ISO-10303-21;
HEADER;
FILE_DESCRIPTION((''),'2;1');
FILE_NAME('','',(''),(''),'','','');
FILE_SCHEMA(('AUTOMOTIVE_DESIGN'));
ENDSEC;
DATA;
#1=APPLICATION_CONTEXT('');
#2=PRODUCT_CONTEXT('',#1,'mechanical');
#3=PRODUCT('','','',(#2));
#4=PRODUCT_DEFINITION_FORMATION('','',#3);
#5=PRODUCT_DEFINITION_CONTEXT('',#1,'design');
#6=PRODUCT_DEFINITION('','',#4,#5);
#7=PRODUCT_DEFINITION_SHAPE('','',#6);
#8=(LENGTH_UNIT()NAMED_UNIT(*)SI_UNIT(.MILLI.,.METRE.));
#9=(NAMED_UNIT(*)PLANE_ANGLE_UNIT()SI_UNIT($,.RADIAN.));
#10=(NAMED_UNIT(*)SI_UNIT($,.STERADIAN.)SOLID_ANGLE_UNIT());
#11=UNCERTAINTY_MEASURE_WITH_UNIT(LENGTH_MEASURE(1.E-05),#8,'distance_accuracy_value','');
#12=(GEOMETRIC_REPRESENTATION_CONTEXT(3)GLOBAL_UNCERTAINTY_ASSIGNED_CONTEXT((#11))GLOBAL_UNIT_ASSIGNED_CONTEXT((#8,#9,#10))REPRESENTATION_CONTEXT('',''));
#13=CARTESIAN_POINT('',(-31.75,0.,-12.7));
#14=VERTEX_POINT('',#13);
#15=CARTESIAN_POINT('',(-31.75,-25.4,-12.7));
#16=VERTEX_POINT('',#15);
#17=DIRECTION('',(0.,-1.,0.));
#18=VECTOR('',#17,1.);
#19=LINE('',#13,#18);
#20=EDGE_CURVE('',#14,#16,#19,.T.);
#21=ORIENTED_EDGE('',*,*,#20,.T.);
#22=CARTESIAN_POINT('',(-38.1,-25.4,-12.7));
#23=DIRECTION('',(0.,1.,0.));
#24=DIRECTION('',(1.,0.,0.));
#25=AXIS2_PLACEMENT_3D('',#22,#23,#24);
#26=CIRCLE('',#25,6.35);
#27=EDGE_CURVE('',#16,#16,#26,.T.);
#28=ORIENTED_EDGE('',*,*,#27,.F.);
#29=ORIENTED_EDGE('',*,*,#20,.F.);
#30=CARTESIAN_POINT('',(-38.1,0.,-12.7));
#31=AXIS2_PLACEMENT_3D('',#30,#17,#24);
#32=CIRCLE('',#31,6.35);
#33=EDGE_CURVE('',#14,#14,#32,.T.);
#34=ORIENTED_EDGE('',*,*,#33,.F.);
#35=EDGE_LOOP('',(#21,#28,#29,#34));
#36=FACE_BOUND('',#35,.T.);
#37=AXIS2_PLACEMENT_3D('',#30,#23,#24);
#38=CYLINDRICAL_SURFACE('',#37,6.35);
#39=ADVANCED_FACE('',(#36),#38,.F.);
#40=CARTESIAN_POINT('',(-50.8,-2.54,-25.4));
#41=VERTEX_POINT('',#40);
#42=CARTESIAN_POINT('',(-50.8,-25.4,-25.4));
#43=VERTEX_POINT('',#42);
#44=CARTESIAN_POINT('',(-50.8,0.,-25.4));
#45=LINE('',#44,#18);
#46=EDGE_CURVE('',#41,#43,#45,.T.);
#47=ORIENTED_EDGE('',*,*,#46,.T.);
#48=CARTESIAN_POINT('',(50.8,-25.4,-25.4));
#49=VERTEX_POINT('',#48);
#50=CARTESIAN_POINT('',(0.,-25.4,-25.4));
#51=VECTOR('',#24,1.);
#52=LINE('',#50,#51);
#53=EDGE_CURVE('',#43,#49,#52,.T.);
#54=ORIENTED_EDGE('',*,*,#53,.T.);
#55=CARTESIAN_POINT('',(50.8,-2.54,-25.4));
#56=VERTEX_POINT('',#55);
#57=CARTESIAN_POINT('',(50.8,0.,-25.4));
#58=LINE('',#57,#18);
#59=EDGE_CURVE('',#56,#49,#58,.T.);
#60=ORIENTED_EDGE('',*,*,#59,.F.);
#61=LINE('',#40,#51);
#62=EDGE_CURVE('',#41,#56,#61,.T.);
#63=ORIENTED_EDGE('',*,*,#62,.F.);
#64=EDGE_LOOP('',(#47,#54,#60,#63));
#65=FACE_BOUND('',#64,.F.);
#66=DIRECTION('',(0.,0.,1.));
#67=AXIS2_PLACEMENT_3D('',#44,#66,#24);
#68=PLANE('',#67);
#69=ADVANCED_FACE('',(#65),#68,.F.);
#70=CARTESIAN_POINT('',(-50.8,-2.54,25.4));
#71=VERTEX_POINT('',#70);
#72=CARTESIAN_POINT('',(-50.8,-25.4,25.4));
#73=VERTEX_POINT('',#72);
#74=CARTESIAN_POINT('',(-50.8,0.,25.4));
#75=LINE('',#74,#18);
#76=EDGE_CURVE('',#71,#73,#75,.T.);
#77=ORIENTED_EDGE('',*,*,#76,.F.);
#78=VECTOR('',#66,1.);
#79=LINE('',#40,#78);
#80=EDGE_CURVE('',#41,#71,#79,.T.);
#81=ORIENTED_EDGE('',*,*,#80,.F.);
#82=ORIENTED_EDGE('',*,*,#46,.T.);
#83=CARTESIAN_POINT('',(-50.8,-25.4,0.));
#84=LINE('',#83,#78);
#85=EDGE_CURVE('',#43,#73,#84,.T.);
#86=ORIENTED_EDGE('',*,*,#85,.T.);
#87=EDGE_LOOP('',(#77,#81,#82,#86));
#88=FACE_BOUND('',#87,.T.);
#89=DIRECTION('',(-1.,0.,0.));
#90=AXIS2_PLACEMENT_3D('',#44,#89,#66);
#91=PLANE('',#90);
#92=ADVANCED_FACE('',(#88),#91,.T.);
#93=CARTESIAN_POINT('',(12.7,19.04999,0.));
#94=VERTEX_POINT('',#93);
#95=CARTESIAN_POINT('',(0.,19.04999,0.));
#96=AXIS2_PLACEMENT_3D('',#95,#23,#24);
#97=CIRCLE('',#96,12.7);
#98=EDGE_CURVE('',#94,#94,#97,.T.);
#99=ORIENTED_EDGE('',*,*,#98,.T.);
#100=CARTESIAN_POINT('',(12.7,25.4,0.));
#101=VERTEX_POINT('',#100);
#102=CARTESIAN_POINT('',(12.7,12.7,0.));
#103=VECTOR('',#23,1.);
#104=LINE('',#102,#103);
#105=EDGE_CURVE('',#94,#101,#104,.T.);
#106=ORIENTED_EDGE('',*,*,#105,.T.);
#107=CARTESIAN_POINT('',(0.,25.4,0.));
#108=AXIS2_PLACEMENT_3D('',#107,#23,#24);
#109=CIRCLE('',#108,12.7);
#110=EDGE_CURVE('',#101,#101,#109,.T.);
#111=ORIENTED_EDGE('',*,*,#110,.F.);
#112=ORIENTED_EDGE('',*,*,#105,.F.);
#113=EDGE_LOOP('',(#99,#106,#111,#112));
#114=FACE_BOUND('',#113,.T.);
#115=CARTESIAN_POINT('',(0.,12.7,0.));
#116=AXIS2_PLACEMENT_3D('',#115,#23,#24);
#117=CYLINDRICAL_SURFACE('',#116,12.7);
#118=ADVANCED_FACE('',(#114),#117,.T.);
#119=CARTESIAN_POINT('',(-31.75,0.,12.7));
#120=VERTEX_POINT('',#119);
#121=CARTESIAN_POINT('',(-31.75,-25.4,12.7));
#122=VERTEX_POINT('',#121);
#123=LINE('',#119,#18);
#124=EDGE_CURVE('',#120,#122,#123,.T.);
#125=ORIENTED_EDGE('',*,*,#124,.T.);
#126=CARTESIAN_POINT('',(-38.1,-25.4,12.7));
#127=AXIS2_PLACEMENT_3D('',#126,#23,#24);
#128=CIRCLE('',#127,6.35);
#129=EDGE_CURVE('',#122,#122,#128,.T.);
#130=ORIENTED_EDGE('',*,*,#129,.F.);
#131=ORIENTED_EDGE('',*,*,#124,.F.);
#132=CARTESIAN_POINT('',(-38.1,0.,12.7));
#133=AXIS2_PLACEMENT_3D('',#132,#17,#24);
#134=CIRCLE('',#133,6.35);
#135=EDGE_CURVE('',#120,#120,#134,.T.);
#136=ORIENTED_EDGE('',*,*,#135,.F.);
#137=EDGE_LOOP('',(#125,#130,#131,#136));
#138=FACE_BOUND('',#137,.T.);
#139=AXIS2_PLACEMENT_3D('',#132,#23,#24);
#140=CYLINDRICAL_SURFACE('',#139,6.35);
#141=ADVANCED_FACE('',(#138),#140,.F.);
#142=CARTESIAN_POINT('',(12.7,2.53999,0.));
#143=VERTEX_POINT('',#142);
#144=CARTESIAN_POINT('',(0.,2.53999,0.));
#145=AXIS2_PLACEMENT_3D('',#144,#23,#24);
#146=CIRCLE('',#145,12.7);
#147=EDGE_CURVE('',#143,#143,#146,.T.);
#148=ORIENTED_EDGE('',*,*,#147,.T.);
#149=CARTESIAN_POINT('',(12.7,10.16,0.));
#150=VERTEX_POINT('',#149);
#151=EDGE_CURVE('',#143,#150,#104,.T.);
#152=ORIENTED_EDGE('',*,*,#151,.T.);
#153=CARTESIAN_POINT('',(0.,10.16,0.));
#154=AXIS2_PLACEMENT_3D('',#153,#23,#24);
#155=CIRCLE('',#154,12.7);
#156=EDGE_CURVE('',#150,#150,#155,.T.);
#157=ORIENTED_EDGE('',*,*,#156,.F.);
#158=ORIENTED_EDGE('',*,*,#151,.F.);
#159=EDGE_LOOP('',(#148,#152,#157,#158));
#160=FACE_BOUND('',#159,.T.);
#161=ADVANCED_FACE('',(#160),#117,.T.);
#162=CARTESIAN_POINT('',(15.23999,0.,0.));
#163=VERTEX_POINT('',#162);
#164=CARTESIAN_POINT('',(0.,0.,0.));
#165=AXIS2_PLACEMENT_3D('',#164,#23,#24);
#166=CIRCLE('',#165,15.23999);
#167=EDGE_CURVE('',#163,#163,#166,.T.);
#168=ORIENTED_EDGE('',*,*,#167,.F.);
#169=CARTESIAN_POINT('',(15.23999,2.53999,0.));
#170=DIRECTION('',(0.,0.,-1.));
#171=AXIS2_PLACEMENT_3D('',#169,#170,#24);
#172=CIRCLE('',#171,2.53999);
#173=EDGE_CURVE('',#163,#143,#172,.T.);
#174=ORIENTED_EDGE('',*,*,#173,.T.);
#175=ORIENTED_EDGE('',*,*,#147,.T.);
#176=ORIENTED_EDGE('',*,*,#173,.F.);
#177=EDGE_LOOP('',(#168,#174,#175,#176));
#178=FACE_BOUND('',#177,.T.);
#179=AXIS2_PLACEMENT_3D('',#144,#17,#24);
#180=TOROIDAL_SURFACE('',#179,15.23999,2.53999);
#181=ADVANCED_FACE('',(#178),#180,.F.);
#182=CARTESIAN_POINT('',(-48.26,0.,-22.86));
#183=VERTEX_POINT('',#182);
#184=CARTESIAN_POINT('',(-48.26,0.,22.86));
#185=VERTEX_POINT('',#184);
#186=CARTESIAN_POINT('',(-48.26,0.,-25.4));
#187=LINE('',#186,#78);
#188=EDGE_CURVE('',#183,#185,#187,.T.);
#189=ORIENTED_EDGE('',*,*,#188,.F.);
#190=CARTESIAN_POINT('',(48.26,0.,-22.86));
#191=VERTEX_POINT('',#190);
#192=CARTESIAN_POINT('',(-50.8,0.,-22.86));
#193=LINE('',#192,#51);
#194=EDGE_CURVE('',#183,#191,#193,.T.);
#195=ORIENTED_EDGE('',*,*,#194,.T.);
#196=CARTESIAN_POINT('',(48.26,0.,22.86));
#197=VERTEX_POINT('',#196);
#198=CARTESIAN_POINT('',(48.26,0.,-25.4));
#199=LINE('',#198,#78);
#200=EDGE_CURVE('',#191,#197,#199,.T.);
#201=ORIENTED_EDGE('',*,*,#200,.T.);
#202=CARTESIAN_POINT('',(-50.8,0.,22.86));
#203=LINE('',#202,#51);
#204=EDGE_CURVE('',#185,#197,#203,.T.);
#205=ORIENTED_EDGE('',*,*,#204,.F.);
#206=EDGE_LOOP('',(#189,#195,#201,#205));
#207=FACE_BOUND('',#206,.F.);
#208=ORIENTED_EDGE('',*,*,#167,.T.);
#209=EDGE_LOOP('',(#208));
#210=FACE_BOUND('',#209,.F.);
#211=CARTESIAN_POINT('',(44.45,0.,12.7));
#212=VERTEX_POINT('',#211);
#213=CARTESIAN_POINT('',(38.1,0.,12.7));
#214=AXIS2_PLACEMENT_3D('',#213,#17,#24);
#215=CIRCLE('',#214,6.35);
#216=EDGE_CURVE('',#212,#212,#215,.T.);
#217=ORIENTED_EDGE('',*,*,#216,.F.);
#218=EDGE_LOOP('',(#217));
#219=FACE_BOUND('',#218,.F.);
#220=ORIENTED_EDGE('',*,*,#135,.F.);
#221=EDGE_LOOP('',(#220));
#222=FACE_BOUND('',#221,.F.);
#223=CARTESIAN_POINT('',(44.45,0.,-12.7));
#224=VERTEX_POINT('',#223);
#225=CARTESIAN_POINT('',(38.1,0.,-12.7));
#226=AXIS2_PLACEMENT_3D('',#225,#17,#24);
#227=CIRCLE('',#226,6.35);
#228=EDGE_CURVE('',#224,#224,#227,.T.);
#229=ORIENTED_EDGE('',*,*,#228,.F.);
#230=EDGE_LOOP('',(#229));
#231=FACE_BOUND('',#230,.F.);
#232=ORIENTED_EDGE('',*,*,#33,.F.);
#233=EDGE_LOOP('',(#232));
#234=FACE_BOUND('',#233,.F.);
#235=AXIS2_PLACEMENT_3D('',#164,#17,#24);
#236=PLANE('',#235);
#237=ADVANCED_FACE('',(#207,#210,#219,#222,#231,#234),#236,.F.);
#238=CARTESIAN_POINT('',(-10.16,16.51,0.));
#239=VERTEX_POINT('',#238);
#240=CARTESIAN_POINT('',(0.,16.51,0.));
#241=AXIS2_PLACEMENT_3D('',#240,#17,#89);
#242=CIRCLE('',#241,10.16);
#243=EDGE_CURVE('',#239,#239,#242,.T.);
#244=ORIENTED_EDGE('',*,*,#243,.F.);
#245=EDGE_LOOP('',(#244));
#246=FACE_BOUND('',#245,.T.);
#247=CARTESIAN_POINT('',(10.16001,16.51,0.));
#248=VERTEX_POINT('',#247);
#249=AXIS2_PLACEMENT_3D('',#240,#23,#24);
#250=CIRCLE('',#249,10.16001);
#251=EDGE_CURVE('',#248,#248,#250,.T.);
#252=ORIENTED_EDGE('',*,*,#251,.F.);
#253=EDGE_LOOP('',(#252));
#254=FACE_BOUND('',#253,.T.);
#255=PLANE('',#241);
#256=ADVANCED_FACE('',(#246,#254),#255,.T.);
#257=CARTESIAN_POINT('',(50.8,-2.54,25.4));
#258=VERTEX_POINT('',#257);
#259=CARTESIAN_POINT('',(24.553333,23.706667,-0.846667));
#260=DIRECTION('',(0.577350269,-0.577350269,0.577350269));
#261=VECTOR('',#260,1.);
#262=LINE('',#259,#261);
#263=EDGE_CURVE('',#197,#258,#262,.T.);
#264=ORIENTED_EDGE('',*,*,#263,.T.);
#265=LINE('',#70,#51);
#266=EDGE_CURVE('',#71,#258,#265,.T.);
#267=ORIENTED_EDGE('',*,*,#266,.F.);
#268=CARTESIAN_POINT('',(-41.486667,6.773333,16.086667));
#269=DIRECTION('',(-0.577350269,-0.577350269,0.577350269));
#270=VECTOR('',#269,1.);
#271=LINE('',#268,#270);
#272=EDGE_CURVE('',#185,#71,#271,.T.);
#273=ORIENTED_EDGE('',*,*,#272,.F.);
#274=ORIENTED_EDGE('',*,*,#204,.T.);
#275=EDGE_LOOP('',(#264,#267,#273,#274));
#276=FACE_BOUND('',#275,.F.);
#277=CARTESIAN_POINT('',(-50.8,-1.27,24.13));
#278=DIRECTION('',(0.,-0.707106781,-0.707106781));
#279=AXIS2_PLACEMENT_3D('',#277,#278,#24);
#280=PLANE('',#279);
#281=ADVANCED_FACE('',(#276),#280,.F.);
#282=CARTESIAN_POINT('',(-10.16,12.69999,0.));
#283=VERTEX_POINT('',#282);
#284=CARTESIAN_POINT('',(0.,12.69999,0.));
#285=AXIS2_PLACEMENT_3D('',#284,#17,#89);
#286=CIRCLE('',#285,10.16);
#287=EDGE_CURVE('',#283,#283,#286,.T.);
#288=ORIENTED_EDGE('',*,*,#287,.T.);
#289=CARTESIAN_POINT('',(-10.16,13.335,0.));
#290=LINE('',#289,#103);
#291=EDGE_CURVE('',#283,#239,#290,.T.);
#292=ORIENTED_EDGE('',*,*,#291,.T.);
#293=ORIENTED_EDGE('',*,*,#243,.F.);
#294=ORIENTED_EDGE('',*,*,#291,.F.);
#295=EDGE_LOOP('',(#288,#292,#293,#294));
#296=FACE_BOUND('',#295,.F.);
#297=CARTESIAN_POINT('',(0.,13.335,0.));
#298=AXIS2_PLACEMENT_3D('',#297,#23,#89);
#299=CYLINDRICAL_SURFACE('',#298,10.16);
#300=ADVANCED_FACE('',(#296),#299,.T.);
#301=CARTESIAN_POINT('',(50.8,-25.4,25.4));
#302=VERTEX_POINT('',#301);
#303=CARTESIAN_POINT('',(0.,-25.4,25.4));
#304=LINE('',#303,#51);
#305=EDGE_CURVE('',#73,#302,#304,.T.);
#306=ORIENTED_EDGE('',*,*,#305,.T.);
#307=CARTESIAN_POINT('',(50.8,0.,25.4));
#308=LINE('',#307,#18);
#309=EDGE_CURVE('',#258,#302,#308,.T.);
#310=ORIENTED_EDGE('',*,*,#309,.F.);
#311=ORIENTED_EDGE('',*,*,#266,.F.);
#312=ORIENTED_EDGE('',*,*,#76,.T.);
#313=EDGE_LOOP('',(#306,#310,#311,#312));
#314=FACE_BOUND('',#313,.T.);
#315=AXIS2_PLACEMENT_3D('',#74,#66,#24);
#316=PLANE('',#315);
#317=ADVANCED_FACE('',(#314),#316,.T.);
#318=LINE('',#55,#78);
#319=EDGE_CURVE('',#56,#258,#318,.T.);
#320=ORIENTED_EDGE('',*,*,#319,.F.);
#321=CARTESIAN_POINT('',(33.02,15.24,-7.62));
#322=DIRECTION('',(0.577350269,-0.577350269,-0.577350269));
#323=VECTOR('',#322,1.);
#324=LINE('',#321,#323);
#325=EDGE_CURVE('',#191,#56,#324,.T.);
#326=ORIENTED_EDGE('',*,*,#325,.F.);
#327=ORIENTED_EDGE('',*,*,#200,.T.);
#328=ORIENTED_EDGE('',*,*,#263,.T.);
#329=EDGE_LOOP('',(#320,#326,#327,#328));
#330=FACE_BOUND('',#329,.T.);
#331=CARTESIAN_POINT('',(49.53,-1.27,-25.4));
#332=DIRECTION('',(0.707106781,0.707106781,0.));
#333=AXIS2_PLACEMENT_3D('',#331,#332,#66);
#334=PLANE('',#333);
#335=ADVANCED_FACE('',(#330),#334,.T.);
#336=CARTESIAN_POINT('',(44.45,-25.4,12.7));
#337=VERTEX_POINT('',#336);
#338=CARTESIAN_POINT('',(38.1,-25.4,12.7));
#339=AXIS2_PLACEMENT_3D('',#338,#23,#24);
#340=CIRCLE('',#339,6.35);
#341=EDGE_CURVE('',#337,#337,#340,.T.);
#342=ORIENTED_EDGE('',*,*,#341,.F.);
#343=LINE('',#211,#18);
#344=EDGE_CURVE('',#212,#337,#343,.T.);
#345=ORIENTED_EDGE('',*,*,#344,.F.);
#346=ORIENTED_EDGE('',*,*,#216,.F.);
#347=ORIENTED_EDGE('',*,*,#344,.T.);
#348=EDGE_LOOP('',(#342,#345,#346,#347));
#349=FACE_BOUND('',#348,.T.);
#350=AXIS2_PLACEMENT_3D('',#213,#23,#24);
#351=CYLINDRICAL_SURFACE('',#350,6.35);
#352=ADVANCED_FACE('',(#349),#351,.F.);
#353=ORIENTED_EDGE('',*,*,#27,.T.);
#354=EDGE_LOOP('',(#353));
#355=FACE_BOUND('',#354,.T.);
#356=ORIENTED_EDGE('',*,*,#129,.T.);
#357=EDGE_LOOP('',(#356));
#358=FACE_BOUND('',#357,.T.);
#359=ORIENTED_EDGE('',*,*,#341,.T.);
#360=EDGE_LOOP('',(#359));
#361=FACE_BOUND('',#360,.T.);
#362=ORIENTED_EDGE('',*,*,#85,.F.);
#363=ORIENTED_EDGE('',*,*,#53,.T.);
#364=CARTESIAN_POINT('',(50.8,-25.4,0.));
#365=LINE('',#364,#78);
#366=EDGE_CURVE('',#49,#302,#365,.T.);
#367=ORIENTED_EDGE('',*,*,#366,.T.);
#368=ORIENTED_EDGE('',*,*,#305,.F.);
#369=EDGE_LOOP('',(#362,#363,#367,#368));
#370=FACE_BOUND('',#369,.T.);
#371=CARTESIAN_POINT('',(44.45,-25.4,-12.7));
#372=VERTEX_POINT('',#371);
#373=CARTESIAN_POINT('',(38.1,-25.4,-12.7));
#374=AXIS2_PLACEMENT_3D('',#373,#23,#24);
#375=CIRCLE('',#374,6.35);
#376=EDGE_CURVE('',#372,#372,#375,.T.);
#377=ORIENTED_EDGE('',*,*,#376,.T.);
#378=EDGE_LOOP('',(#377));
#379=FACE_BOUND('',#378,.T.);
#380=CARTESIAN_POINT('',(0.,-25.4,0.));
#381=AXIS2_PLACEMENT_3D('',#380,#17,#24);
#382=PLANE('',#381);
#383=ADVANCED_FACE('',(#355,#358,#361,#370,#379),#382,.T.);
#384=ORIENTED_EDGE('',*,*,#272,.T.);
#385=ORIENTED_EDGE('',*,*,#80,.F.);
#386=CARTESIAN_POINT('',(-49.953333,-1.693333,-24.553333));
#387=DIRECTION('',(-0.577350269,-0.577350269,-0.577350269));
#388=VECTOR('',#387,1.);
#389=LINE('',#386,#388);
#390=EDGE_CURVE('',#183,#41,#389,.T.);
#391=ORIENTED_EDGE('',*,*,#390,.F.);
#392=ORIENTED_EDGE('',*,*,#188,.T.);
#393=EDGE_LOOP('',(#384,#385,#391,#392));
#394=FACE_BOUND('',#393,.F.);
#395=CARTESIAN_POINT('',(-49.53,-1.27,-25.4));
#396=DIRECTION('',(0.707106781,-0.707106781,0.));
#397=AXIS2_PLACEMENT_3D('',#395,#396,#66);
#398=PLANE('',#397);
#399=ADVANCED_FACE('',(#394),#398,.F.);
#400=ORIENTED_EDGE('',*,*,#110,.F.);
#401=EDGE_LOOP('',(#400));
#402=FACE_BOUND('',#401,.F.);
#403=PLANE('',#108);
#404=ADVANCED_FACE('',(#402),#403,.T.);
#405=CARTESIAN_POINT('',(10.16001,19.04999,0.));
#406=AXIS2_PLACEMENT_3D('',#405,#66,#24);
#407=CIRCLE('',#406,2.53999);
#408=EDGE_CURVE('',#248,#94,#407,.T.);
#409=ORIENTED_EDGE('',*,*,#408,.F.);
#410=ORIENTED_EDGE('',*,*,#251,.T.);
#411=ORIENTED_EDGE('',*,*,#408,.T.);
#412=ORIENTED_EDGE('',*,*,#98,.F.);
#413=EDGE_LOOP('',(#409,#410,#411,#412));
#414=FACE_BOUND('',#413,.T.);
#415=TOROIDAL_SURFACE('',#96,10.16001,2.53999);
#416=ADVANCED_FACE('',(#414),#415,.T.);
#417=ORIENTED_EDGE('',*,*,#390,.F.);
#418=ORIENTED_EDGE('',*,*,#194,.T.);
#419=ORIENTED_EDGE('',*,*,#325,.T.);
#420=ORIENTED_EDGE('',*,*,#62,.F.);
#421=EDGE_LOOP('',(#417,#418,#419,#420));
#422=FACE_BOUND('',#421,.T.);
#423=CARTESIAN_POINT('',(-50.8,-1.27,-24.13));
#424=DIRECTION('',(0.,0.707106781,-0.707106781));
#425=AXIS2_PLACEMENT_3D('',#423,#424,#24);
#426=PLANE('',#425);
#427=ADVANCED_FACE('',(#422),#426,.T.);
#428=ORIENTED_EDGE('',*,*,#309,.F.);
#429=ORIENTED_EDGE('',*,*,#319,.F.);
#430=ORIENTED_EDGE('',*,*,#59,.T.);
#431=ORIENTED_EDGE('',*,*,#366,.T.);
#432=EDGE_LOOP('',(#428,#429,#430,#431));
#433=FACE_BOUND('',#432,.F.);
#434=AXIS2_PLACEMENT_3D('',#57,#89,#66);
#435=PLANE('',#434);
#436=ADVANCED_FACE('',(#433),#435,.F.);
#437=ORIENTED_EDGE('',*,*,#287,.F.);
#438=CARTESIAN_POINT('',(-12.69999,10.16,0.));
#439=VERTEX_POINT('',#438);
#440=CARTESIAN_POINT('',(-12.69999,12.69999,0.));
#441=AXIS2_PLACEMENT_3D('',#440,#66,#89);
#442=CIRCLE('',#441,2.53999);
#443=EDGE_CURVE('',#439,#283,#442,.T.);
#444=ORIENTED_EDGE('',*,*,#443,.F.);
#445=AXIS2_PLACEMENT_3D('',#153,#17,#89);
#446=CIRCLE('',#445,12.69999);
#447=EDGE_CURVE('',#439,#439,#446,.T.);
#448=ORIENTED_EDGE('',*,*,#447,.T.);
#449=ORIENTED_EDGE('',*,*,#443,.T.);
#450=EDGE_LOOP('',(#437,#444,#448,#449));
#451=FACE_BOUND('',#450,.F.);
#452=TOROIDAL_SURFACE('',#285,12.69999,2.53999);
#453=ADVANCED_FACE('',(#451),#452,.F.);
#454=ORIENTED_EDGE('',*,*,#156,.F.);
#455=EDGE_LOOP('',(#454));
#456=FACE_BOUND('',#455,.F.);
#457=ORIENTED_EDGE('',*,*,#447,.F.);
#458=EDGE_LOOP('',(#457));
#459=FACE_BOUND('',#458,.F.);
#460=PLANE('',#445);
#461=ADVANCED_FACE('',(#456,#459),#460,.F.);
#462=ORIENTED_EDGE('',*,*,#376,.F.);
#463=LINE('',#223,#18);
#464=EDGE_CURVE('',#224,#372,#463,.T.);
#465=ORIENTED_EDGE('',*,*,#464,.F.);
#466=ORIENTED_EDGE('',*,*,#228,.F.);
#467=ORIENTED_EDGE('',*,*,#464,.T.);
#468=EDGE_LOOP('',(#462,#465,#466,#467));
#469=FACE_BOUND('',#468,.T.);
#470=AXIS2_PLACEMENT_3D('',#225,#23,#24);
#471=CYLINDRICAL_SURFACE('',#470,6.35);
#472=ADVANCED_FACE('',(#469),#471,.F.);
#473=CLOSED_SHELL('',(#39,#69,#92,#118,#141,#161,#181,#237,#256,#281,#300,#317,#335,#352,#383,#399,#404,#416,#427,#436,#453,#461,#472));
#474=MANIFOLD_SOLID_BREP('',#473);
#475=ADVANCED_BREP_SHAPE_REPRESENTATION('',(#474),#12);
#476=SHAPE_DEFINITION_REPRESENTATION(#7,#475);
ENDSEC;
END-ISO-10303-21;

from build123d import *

# Parameters (mm, degrees)
F0_W     = 101.6
F0_H     = 50.8
F1_DEPTH = 25.4
F2_R     = 6.35
F3_DEPTH = 25.401
F4_W     = 12.7
F4_H     = 25.4
F6_W     = 8.9851264438
F6_H     = 6.35
F8_R     = 2.53999
F9_SIZE  = 2.54


# Not quite as in the source:
# - a fillet or chamfer is up to 0.001 mm smaller than in the source, because OpenCascade refuses the exact size


with BuildPart() as f1:
    # F0 (on Front) → F1 (new body)
    with BuildSketch(Plane.XZ):
        Rectangle(F0_W, F0_H)
    extrude(amount=F1_DEPTH)

    # F2 (on Front) → F3 (cut, through all)
    with BuildSketch(Plane.XZ):
        with Locations((-38.1, 12.7)):
            Circle(F2_R)
        with Locations((-38.1, -12.7)):
            Circle(F2_R)
        with Locations((38.1, -12.7)):
            Circle(F2_R)
        with Locations((38.1, 12.7)):
            Circle(F2_R)
    extrude(amount=F3_DEPTH, mode=Mode.SUBTRACT)

    # F4 (on Top) → F5 (revolve)
    with BuildSketch(Plane.XY):
        with Locations((6.35, 12.7)):
            Rectangle(F4_W, F4_H)
    revolve(axis=Axis((0, 12.7, 0), (0, 1, 0)))

    # F6 (on Top) → F7 (revolve, cut)
    with BuildSketch(Plane.XY):
        with Locations((-14.6525632219, 13.335)):
            Rectangle(F6_W, F6_H)
    revolve(axis=Axis((0, 6.6735967994, 0), (0, -1, 0)), mode=Mode.SUBTRACT)

    # F8 (radius 2.54 in the source; OpenCascade refuses exactly that, so slightly less here)
    f8_edges = [f1.edges().sort_by_distance(p)[0] for p in [
        (-12.7, 0, 0),
        (10.16, 10.16, 0),
        (-12.7, 16.51, 0),
    ]]
    fillet(f8_edges, radius=F8_R)

    # F9
    f9_edges = [f1.edges().sort_by_distance(p)[0] for p in [
        (0, 0, 25.4),
        (50.8, 0, 0),
        (0, 0, -25.4),
        (-50.8, 0, 0),
    ]]
    chamfer(f9_edges, length=F9_SIZE)


solid = f1.part
